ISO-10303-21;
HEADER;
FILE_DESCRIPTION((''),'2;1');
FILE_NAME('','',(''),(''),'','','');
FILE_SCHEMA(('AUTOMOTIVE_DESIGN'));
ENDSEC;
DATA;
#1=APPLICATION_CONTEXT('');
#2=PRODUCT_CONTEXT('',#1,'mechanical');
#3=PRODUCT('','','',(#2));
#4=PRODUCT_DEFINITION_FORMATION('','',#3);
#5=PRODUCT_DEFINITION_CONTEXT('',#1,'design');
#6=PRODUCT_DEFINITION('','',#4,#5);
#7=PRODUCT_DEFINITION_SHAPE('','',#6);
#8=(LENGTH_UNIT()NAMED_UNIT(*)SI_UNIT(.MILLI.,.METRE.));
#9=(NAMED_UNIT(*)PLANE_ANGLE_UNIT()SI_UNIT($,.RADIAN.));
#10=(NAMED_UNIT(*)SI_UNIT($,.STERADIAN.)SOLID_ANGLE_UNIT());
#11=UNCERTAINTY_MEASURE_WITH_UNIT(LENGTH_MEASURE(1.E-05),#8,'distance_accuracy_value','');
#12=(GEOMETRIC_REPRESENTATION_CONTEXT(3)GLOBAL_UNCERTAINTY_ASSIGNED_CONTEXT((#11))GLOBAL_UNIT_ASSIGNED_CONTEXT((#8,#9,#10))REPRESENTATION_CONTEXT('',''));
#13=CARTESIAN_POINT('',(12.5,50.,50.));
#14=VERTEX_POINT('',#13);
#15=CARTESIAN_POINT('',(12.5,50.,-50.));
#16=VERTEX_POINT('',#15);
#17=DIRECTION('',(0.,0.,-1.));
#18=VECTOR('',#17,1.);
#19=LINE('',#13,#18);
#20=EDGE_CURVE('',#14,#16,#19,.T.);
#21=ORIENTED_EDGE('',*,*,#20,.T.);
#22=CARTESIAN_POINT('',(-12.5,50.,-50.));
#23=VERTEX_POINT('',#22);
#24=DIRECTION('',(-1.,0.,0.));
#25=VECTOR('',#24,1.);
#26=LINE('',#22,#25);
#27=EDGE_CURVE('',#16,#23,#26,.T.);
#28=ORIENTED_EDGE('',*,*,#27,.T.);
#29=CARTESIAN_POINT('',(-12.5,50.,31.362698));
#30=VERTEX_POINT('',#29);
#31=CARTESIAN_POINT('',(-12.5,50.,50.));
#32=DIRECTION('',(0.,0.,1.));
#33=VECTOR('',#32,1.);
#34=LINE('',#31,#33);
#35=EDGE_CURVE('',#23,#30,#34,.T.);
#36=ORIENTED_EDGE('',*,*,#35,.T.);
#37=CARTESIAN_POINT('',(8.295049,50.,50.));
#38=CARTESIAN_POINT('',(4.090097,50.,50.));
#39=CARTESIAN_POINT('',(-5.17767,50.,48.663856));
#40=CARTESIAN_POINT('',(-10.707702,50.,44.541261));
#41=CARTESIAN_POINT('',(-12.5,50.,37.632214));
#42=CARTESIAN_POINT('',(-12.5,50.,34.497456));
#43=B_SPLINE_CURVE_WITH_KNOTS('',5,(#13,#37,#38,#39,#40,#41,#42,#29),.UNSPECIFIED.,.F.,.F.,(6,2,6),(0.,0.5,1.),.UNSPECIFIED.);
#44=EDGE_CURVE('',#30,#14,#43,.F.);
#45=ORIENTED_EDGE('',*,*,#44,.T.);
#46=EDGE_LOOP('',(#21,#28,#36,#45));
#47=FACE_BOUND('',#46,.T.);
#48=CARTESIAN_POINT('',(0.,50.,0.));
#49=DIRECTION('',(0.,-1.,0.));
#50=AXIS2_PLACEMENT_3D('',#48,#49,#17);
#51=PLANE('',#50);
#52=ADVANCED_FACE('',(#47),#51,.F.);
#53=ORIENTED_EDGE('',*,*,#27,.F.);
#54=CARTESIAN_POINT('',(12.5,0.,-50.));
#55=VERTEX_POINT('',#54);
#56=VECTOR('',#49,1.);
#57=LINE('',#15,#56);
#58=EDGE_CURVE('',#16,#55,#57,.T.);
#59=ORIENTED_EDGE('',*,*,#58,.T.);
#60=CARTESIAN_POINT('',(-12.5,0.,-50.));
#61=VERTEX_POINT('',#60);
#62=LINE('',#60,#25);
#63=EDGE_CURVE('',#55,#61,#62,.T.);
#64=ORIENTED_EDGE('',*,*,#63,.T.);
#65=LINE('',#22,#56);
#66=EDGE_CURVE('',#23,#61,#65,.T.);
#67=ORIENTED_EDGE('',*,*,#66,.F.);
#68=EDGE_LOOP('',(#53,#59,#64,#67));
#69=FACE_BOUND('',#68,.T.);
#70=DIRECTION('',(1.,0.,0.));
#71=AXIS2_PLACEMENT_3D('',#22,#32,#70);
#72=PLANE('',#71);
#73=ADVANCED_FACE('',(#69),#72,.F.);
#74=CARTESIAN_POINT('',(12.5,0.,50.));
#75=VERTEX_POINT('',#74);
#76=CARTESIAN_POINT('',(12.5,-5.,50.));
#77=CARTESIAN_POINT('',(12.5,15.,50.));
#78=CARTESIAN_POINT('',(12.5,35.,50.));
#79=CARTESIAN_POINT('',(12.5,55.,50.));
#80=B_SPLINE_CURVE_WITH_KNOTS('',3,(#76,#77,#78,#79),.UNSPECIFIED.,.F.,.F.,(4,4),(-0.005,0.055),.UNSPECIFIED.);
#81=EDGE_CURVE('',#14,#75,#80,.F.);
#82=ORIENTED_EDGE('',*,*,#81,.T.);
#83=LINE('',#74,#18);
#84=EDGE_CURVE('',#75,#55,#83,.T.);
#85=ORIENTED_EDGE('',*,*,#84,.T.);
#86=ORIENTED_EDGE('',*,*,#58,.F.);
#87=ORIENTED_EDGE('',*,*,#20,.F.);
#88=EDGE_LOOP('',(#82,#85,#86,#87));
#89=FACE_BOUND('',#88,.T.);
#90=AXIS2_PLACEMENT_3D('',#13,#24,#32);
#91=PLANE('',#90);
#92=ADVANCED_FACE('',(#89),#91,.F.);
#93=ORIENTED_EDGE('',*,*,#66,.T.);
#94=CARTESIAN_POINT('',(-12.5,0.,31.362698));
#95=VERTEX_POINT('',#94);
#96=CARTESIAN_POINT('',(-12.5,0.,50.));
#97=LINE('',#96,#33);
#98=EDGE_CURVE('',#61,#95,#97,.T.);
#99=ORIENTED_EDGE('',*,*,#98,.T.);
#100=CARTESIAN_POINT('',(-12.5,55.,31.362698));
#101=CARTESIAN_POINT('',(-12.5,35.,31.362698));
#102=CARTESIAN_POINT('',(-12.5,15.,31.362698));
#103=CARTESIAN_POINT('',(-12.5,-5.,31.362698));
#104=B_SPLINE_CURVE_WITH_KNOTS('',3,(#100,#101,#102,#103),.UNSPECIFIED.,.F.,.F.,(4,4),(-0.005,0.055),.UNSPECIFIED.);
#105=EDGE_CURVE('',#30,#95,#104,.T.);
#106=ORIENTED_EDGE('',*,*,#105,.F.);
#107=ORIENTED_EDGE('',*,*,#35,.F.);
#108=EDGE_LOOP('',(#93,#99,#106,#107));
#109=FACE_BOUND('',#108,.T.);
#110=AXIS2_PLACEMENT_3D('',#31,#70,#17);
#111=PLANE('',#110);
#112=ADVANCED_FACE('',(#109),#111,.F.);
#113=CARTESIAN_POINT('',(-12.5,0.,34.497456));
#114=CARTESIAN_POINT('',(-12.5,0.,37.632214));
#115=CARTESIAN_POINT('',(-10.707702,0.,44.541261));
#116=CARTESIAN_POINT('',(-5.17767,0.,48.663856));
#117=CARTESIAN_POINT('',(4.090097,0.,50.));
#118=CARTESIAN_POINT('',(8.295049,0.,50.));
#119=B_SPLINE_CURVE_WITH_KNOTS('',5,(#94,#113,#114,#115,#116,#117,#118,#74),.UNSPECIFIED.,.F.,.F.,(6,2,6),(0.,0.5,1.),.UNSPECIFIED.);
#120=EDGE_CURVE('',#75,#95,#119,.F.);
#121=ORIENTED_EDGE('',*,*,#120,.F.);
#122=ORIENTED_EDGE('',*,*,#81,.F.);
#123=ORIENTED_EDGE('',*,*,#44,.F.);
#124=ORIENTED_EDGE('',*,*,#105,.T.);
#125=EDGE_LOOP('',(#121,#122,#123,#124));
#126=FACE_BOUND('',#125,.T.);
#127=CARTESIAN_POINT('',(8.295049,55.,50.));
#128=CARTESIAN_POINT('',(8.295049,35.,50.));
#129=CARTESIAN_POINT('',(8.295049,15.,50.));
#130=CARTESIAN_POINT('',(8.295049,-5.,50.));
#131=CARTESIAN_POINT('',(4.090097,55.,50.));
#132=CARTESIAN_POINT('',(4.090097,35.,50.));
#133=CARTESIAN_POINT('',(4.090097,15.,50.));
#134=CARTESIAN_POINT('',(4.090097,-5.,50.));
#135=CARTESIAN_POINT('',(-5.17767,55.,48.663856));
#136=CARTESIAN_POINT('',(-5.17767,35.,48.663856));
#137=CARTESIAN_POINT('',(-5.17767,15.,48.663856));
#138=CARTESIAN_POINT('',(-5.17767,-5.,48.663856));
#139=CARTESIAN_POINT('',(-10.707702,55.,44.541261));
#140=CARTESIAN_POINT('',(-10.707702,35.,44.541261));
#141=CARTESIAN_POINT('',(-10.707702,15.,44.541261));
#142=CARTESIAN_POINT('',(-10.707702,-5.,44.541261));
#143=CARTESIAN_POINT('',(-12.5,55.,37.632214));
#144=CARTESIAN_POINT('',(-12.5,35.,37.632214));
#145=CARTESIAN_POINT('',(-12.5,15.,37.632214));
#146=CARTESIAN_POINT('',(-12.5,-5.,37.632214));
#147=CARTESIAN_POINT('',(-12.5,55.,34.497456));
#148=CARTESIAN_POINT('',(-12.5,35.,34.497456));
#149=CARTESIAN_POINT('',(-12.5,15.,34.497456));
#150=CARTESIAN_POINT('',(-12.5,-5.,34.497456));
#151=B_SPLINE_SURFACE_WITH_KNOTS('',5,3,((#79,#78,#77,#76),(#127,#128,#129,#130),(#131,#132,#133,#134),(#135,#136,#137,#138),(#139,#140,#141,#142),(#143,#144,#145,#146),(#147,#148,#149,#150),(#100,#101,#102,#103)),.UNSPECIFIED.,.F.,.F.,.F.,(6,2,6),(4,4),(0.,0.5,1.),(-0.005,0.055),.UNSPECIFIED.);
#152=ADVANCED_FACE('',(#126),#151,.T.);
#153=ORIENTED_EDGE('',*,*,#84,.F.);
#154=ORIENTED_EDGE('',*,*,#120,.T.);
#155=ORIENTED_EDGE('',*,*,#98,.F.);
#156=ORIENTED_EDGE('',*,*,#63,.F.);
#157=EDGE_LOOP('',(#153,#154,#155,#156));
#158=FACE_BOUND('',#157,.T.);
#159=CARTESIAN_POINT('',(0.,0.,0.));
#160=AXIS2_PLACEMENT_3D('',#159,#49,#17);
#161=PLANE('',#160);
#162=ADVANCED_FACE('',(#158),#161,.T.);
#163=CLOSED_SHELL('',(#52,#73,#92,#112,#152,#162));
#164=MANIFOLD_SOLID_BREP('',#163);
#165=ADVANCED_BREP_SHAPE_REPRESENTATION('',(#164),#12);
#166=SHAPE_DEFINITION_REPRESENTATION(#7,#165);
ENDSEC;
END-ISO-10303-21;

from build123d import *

# Parameters (mm, degrees)
SKETCH1_W           = 25
SKETCH1_H           = 100
BOSS_EXTRUDE1_DEPTH = 50
FILLET1_START       = -1
FILLET1_DEPTH       = 52


with BuildPart() as part:
    # Sketch1 → Boss-Extrude1 (new body)
    with BuildSketch(Plane(origin=(0, 0, 0), x_dir=(1, 0, 0), z_dir=(0, 1, 0))):
        Rectangle(SKETCH1_W, SKETCH1_H)
    extrude(amount=BOSS_EXTRUDE1_DEPTH)

    # Fillet1: read off the stored shape, not the designer's step
    # Fillet1 outline → Fillet1 (cut)
    with BuildSketch(Plane(origin=(0, 0, 0), x_dir=(1, 0, 0), z_dir=(0, 1, 0)).offset(FILLET1_START)):
        with BuildLine():
            Line((-12.5, -50), (12.5, -50))
            add(Edge.make_bspline(
                [(12.5, -50), (8.295048712, -50), (4.090097423, -50), (-5.17766953, -48.66385604), (-10.707702004, -44.541260632), (-12.5, -37.632213775), (-12.5, -34.497455895), (-12.5, -31.362698016)],
                knots=[0, 0, 0, 0, 0, 0, 0.5, 0.5, 1, 1, 1, 1, 1, 1], degree=5))
            Line((-12.5, -31.362698016), (-12.5, -50))
        make_face()
    extrude(amount=FILLET1_DEPTH, mode=Mode.SUBTRACT)


solid = part.part
